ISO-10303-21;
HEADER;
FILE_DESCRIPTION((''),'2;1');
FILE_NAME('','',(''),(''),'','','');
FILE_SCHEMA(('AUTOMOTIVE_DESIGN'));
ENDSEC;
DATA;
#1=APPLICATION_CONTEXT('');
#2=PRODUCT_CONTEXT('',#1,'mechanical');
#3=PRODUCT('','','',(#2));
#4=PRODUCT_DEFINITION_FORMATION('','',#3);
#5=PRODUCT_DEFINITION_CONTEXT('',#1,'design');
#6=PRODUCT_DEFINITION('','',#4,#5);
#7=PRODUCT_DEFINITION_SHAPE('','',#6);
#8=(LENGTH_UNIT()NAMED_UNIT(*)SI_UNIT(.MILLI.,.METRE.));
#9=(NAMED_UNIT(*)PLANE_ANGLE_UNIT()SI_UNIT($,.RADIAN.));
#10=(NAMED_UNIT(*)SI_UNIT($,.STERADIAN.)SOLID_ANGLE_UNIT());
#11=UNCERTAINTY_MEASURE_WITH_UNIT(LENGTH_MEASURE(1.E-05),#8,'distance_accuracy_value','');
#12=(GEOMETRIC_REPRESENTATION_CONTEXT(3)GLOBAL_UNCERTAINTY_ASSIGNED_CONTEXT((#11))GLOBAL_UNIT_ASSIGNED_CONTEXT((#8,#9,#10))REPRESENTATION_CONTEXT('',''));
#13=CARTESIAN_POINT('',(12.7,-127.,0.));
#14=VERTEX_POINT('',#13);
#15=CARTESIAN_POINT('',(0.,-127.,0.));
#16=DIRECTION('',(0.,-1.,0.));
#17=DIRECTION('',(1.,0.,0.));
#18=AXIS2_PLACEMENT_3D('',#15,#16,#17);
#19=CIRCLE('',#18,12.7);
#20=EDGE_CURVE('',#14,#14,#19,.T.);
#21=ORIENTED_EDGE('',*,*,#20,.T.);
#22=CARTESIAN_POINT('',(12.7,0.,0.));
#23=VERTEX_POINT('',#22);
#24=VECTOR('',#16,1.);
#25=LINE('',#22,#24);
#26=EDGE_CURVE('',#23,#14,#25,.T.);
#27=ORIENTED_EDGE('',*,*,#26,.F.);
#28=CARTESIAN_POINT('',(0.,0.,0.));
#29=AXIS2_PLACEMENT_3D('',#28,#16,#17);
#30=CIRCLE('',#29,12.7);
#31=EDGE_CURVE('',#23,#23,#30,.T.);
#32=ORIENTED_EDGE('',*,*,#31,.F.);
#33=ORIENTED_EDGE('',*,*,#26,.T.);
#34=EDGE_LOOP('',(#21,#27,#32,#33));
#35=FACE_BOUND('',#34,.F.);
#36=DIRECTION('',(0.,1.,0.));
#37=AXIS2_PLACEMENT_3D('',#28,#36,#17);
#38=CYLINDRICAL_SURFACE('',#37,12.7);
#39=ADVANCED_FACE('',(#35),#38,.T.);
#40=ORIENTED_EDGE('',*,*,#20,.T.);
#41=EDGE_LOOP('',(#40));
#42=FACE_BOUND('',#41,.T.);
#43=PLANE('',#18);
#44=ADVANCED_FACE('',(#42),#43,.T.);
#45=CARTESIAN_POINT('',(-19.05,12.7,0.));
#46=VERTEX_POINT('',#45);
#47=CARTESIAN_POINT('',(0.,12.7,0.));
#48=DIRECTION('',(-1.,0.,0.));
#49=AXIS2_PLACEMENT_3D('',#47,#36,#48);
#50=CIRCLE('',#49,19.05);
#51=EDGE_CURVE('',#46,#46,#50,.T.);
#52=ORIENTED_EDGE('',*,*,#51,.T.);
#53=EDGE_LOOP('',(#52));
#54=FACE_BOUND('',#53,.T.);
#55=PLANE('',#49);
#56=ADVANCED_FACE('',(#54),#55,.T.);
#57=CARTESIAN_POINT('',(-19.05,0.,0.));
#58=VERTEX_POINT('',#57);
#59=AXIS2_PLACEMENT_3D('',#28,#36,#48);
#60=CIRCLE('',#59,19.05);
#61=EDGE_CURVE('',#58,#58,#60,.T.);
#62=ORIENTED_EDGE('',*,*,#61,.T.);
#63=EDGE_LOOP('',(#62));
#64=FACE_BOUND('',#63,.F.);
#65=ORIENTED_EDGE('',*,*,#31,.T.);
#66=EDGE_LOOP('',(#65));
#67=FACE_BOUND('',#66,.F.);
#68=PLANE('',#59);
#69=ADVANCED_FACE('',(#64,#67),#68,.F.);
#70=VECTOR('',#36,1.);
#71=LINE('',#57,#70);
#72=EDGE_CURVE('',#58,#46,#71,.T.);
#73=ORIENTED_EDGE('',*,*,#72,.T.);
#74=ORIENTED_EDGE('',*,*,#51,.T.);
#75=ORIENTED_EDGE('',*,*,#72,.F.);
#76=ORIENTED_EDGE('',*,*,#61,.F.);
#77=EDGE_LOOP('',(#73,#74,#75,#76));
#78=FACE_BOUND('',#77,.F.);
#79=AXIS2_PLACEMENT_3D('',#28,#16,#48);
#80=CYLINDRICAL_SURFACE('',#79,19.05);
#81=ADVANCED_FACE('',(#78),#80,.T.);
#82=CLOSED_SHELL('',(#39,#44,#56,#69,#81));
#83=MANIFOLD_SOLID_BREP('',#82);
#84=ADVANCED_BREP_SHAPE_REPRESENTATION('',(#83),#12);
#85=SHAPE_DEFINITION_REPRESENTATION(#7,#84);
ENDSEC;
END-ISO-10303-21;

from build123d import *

# Parameters (mm, degrees)
F0_R     = 12.7
F1_DEPTH = 127
F2_R     = 19.05
F2_R_2   = 12.7
F3_DEPTH = 12.7


with BuildPart() as f1:
    # F0 (on Front) → F1 (new body)
    with BuildSketch(Plane.XZ):
        Circle(F0_R)
    extrude(amount=F1_DEPTH)

    # F2 (on face) → F3 (join)
    with BuildSketch(Plane(origin=(0, 0, 0), x_dir=(-1, 0, 0), z_dir=(0, 1, 0))):
        Circle(F2_R)
        Circle(F2_R_2, mode=Mode.SUBTRACT)
        Circle(F2_R_2)
    extrude(amount=F3_DEPTH)


solid = f1.part
